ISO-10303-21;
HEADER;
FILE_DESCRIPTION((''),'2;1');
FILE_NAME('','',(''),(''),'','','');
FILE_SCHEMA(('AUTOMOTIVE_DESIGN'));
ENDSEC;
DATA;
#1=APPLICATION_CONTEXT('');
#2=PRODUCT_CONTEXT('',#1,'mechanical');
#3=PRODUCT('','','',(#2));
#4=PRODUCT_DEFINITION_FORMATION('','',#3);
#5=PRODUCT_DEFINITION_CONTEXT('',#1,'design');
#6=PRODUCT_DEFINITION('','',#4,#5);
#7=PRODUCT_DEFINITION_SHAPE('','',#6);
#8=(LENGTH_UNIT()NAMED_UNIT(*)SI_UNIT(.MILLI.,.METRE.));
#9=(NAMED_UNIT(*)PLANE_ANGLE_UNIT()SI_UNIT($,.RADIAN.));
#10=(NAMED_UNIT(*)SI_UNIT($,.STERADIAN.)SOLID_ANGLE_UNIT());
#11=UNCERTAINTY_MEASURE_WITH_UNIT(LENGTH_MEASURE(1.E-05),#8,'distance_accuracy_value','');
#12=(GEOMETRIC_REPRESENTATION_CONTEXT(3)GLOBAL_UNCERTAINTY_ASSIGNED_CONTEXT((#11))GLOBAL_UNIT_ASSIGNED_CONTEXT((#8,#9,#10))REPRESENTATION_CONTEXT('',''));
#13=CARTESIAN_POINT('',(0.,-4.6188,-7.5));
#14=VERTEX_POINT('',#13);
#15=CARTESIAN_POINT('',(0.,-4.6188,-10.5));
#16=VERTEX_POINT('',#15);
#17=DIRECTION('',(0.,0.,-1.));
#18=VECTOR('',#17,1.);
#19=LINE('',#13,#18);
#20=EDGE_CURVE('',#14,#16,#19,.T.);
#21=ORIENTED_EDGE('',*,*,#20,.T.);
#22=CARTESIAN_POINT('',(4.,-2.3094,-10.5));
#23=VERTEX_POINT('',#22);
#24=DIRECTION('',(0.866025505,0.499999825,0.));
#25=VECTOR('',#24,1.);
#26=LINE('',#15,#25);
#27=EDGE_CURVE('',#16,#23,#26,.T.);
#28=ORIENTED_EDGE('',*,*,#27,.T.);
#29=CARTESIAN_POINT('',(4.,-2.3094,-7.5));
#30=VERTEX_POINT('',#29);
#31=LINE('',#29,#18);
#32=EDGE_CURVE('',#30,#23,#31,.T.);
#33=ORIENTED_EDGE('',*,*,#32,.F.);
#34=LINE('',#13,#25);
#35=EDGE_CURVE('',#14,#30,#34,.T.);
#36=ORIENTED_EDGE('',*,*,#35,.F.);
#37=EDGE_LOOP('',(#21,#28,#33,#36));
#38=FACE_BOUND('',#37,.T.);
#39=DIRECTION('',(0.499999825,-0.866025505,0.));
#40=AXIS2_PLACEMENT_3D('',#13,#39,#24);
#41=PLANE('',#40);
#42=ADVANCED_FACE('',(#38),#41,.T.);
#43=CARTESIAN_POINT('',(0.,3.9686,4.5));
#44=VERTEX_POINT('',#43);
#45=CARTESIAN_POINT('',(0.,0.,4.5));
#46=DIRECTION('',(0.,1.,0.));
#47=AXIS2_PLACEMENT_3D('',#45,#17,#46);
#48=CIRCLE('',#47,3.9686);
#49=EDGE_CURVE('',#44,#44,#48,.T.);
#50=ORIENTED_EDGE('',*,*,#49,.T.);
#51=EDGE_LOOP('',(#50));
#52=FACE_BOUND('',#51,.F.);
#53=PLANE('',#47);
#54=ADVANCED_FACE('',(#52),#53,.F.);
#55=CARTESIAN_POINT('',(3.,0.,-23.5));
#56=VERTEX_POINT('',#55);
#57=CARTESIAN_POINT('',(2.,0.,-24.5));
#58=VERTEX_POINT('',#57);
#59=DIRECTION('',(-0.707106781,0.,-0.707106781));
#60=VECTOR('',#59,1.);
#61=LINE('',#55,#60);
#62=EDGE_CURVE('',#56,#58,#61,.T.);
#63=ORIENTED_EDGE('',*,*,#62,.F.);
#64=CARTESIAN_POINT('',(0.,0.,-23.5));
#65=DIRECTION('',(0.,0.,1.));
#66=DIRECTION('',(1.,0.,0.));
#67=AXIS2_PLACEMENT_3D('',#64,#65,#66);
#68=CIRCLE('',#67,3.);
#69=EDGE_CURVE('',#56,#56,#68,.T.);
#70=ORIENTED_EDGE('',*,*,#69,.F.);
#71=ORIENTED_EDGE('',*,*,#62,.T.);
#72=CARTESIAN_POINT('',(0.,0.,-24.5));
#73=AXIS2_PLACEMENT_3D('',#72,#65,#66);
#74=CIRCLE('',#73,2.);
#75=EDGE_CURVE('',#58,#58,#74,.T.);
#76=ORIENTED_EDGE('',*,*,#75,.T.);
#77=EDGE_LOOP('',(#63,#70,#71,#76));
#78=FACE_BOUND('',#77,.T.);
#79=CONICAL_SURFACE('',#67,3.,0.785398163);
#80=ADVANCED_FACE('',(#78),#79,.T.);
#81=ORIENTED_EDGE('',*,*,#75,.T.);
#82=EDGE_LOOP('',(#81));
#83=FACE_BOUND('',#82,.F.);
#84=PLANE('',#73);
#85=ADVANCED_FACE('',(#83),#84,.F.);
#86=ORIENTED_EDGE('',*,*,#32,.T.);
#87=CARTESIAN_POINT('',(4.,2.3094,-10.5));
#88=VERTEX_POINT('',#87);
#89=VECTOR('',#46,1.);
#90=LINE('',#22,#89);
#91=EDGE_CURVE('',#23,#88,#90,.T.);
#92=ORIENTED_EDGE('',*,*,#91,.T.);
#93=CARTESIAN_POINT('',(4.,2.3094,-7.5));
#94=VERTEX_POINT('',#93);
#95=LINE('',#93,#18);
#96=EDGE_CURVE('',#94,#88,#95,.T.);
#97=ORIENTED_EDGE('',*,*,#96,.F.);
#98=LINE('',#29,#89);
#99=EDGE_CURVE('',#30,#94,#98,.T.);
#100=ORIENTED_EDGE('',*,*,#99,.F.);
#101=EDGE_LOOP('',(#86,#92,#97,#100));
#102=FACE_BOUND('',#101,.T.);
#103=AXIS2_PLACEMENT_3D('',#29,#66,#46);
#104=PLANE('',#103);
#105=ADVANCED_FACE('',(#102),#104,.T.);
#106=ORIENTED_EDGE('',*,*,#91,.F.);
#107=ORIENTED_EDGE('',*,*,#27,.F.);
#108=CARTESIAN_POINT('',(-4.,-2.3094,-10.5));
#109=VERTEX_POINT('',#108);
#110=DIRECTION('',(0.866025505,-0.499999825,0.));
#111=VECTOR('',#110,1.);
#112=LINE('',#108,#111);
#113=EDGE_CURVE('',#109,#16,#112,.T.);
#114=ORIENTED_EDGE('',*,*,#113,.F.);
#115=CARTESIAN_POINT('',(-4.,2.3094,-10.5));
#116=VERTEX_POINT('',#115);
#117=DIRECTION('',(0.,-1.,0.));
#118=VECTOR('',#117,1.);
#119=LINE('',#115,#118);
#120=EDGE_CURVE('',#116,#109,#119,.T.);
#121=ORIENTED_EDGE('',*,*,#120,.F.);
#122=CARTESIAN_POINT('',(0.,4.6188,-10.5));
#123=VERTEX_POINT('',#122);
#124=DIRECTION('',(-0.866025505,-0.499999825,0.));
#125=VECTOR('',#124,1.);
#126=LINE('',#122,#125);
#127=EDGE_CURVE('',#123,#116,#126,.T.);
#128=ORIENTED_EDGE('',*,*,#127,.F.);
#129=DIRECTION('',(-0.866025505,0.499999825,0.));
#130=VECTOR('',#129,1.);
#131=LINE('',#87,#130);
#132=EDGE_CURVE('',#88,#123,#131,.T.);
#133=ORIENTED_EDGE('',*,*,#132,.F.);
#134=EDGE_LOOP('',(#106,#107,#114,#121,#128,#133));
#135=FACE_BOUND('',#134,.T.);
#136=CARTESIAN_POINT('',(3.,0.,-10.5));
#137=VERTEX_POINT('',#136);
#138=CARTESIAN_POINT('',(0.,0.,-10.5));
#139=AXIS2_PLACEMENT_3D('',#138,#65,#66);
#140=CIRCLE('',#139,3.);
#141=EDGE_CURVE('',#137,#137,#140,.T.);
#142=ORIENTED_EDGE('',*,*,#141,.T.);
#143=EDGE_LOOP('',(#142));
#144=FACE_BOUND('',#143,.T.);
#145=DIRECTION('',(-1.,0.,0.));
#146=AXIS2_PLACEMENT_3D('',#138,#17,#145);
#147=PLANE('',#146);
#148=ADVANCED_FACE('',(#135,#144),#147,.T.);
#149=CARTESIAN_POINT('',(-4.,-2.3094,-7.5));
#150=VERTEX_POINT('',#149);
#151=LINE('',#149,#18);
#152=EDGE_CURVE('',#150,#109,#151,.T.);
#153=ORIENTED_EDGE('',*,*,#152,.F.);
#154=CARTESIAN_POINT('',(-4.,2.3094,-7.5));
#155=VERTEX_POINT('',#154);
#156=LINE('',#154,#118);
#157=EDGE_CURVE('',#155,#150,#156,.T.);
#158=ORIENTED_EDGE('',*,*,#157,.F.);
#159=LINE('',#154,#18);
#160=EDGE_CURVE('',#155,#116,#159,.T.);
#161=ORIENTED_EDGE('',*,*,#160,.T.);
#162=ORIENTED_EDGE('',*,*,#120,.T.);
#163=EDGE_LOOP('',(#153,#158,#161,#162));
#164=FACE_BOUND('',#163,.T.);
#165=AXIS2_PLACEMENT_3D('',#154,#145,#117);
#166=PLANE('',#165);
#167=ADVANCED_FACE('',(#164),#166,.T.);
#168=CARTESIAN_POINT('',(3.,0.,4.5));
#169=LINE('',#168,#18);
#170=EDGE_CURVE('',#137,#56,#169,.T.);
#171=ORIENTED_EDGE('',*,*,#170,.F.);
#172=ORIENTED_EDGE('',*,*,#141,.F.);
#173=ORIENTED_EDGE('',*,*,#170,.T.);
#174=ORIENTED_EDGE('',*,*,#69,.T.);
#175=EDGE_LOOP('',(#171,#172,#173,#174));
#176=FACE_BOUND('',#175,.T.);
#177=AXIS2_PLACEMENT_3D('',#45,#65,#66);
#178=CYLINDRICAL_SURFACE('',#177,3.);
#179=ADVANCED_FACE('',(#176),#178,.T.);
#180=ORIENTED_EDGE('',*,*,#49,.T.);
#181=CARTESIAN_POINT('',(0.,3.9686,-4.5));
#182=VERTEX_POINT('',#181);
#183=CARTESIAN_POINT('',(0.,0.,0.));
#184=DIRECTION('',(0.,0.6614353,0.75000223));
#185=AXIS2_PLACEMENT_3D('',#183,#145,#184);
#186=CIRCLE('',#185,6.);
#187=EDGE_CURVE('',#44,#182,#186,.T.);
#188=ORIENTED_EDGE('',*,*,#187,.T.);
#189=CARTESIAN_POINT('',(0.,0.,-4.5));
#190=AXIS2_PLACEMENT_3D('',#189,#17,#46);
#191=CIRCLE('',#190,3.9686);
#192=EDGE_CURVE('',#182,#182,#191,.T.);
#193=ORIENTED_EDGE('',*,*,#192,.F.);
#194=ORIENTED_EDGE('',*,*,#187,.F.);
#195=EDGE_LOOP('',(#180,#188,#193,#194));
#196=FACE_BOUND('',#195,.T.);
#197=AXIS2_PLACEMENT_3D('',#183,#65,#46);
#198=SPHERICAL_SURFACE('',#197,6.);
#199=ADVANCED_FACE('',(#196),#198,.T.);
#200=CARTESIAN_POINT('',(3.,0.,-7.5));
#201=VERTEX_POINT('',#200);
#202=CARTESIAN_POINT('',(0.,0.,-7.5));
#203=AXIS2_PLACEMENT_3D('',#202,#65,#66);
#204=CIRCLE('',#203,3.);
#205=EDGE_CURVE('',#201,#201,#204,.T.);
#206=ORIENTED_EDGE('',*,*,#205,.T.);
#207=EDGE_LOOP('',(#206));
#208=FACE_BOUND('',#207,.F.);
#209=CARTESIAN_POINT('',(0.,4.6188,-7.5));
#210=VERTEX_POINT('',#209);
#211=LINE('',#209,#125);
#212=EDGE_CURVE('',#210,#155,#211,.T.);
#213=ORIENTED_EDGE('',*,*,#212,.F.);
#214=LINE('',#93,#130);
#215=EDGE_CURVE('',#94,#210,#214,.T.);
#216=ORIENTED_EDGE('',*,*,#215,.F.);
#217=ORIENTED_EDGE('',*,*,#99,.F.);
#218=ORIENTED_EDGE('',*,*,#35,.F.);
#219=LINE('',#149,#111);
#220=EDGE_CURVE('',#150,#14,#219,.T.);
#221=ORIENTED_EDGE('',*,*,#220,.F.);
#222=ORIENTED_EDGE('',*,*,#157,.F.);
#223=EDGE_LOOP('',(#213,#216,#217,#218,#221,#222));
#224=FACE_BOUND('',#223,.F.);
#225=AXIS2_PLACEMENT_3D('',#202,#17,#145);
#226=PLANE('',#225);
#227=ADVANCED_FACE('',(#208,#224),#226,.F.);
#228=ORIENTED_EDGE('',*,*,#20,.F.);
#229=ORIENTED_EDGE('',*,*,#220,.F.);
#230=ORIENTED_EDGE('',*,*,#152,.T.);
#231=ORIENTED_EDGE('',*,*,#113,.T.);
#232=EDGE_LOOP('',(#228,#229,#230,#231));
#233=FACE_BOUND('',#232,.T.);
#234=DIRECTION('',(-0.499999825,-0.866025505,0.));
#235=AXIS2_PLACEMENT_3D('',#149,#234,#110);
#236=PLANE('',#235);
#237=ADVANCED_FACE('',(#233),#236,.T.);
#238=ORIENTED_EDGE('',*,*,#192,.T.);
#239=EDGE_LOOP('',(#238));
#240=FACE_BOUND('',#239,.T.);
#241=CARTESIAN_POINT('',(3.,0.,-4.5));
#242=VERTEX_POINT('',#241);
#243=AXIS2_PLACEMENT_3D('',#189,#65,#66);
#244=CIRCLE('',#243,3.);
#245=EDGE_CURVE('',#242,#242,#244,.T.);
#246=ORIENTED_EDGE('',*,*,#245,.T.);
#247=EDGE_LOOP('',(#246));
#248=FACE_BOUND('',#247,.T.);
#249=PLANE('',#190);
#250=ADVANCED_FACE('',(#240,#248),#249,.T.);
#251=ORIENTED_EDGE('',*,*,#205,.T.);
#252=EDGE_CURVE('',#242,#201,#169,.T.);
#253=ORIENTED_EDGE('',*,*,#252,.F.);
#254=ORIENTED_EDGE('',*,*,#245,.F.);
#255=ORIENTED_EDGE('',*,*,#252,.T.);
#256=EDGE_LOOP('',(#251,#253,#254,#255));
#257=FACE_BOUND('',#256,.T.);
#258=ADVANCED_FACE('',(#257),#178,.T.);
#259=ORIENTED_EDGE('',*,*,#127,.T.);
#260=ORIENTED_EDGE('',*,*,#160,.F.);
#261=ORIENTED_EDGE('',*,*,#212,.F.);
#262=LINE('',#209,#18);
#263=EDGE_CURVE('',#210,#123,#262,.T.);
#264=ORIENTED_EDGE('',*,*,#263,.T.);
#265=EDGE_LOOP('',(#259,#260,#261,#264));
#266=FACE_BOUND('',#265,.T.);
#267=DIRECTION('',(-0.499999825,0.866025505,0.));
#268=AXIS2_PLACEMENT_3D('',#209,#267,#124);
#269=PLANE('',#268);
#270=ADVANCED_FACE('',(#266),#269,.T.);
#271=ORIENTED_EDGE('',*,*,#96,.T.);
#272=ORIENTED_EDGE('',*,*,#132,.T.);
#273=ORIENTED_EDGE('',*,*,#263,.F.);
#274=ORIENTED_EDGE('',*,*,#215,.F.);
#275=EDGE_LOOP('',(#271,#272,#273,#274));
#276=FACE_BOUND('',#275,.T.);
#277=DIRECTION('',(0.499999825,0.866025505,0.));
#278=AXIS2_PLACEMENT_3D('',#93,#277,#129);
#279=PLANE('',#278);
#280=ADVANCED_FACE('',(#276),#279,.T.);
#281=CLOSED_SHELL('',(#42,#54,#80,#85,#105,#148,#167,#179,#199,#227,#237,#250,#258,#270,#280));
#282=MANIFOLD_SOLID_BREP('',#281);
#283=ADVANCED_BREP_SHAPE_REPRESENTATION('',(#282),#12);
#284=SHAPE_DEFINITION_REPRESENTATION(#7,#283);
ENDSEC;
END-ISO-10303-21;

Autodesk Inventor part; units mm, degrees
ref_plane "YZ Plane" through (0, 0, 0) normal (1, 0, 0) x (0, 1, 0)
ref_plane "XZ Plane" through (0, 0, 0) normal (0, 1, 0) x (-1, 0, 0)
sketch "Sketch1" plane through (0, 0, 0) normal (1, 0, 0) x (0, 1, 0)
  circle A0 centre (0, 0) radius 6
  line L0 (0, 6) -> (0, -6)
  line L1 (3, -5.1962) -> (3, 5.1962)
  line L2 (3.9686, 4.5) -> (3, 4.5)
  line L3 (3.9686, -4.5) -> (3, -4.5)
  dimension "d0" = 6
  dimension "d1" = 9
  dimension "d2" = 12
revolve "Revolution1" add sketch "Sketch1" angle 360 about axis through (0, 0, 6) along (0, 0, -1) contours A0 L3 L1 L2
sketch "Sketch2" plane through (0, 0, 4.5) normal (0, 0, 1) x (1, 0, 0)
  circle A0 centre (0, 0) radius 3
  dimension "d4" = 6
extrude "Extrusion1" add sketch "Sketch2" against normal blind 29
ref_plane "Work Plane1" through (0, 0, -7.5) normal (0, 0, -1) x (-1, 0, 0)
sketch "Sketch3" plane through (0, 0, -7.5) normal (0, 0, -1) x (-1, 0, 0)
  line L0 (4, -2.3094) -> (0, -4.6188)
  line L1 (0, -4.6188) -> (-4, -2.3094)
  line L2 (-4, -2.3094) -> (-4, 2.3094)
  line L3 (-4, 2.3094) -> (0, 4.6188)
  line L4 (0, 4.6188) -> (4, 2.3094)
  line L5 (4, 2.3094) -> (4, -2.3094)
  point P0 (0, 0)
  point P1 (0, 0)
  dimension "d8" = 8
extrude "Extrusion2" add sketch "Sketch3" along normal blind 3
chamfer "Chamfer1" distance 1 angle 45 1 edges at (-3, 0, -24.5)
thread "Thread1" size "M6x1" class "6g" standard "ISO Metric profile" length 12
properties part number "Ball" material "Steel, Carbon"
